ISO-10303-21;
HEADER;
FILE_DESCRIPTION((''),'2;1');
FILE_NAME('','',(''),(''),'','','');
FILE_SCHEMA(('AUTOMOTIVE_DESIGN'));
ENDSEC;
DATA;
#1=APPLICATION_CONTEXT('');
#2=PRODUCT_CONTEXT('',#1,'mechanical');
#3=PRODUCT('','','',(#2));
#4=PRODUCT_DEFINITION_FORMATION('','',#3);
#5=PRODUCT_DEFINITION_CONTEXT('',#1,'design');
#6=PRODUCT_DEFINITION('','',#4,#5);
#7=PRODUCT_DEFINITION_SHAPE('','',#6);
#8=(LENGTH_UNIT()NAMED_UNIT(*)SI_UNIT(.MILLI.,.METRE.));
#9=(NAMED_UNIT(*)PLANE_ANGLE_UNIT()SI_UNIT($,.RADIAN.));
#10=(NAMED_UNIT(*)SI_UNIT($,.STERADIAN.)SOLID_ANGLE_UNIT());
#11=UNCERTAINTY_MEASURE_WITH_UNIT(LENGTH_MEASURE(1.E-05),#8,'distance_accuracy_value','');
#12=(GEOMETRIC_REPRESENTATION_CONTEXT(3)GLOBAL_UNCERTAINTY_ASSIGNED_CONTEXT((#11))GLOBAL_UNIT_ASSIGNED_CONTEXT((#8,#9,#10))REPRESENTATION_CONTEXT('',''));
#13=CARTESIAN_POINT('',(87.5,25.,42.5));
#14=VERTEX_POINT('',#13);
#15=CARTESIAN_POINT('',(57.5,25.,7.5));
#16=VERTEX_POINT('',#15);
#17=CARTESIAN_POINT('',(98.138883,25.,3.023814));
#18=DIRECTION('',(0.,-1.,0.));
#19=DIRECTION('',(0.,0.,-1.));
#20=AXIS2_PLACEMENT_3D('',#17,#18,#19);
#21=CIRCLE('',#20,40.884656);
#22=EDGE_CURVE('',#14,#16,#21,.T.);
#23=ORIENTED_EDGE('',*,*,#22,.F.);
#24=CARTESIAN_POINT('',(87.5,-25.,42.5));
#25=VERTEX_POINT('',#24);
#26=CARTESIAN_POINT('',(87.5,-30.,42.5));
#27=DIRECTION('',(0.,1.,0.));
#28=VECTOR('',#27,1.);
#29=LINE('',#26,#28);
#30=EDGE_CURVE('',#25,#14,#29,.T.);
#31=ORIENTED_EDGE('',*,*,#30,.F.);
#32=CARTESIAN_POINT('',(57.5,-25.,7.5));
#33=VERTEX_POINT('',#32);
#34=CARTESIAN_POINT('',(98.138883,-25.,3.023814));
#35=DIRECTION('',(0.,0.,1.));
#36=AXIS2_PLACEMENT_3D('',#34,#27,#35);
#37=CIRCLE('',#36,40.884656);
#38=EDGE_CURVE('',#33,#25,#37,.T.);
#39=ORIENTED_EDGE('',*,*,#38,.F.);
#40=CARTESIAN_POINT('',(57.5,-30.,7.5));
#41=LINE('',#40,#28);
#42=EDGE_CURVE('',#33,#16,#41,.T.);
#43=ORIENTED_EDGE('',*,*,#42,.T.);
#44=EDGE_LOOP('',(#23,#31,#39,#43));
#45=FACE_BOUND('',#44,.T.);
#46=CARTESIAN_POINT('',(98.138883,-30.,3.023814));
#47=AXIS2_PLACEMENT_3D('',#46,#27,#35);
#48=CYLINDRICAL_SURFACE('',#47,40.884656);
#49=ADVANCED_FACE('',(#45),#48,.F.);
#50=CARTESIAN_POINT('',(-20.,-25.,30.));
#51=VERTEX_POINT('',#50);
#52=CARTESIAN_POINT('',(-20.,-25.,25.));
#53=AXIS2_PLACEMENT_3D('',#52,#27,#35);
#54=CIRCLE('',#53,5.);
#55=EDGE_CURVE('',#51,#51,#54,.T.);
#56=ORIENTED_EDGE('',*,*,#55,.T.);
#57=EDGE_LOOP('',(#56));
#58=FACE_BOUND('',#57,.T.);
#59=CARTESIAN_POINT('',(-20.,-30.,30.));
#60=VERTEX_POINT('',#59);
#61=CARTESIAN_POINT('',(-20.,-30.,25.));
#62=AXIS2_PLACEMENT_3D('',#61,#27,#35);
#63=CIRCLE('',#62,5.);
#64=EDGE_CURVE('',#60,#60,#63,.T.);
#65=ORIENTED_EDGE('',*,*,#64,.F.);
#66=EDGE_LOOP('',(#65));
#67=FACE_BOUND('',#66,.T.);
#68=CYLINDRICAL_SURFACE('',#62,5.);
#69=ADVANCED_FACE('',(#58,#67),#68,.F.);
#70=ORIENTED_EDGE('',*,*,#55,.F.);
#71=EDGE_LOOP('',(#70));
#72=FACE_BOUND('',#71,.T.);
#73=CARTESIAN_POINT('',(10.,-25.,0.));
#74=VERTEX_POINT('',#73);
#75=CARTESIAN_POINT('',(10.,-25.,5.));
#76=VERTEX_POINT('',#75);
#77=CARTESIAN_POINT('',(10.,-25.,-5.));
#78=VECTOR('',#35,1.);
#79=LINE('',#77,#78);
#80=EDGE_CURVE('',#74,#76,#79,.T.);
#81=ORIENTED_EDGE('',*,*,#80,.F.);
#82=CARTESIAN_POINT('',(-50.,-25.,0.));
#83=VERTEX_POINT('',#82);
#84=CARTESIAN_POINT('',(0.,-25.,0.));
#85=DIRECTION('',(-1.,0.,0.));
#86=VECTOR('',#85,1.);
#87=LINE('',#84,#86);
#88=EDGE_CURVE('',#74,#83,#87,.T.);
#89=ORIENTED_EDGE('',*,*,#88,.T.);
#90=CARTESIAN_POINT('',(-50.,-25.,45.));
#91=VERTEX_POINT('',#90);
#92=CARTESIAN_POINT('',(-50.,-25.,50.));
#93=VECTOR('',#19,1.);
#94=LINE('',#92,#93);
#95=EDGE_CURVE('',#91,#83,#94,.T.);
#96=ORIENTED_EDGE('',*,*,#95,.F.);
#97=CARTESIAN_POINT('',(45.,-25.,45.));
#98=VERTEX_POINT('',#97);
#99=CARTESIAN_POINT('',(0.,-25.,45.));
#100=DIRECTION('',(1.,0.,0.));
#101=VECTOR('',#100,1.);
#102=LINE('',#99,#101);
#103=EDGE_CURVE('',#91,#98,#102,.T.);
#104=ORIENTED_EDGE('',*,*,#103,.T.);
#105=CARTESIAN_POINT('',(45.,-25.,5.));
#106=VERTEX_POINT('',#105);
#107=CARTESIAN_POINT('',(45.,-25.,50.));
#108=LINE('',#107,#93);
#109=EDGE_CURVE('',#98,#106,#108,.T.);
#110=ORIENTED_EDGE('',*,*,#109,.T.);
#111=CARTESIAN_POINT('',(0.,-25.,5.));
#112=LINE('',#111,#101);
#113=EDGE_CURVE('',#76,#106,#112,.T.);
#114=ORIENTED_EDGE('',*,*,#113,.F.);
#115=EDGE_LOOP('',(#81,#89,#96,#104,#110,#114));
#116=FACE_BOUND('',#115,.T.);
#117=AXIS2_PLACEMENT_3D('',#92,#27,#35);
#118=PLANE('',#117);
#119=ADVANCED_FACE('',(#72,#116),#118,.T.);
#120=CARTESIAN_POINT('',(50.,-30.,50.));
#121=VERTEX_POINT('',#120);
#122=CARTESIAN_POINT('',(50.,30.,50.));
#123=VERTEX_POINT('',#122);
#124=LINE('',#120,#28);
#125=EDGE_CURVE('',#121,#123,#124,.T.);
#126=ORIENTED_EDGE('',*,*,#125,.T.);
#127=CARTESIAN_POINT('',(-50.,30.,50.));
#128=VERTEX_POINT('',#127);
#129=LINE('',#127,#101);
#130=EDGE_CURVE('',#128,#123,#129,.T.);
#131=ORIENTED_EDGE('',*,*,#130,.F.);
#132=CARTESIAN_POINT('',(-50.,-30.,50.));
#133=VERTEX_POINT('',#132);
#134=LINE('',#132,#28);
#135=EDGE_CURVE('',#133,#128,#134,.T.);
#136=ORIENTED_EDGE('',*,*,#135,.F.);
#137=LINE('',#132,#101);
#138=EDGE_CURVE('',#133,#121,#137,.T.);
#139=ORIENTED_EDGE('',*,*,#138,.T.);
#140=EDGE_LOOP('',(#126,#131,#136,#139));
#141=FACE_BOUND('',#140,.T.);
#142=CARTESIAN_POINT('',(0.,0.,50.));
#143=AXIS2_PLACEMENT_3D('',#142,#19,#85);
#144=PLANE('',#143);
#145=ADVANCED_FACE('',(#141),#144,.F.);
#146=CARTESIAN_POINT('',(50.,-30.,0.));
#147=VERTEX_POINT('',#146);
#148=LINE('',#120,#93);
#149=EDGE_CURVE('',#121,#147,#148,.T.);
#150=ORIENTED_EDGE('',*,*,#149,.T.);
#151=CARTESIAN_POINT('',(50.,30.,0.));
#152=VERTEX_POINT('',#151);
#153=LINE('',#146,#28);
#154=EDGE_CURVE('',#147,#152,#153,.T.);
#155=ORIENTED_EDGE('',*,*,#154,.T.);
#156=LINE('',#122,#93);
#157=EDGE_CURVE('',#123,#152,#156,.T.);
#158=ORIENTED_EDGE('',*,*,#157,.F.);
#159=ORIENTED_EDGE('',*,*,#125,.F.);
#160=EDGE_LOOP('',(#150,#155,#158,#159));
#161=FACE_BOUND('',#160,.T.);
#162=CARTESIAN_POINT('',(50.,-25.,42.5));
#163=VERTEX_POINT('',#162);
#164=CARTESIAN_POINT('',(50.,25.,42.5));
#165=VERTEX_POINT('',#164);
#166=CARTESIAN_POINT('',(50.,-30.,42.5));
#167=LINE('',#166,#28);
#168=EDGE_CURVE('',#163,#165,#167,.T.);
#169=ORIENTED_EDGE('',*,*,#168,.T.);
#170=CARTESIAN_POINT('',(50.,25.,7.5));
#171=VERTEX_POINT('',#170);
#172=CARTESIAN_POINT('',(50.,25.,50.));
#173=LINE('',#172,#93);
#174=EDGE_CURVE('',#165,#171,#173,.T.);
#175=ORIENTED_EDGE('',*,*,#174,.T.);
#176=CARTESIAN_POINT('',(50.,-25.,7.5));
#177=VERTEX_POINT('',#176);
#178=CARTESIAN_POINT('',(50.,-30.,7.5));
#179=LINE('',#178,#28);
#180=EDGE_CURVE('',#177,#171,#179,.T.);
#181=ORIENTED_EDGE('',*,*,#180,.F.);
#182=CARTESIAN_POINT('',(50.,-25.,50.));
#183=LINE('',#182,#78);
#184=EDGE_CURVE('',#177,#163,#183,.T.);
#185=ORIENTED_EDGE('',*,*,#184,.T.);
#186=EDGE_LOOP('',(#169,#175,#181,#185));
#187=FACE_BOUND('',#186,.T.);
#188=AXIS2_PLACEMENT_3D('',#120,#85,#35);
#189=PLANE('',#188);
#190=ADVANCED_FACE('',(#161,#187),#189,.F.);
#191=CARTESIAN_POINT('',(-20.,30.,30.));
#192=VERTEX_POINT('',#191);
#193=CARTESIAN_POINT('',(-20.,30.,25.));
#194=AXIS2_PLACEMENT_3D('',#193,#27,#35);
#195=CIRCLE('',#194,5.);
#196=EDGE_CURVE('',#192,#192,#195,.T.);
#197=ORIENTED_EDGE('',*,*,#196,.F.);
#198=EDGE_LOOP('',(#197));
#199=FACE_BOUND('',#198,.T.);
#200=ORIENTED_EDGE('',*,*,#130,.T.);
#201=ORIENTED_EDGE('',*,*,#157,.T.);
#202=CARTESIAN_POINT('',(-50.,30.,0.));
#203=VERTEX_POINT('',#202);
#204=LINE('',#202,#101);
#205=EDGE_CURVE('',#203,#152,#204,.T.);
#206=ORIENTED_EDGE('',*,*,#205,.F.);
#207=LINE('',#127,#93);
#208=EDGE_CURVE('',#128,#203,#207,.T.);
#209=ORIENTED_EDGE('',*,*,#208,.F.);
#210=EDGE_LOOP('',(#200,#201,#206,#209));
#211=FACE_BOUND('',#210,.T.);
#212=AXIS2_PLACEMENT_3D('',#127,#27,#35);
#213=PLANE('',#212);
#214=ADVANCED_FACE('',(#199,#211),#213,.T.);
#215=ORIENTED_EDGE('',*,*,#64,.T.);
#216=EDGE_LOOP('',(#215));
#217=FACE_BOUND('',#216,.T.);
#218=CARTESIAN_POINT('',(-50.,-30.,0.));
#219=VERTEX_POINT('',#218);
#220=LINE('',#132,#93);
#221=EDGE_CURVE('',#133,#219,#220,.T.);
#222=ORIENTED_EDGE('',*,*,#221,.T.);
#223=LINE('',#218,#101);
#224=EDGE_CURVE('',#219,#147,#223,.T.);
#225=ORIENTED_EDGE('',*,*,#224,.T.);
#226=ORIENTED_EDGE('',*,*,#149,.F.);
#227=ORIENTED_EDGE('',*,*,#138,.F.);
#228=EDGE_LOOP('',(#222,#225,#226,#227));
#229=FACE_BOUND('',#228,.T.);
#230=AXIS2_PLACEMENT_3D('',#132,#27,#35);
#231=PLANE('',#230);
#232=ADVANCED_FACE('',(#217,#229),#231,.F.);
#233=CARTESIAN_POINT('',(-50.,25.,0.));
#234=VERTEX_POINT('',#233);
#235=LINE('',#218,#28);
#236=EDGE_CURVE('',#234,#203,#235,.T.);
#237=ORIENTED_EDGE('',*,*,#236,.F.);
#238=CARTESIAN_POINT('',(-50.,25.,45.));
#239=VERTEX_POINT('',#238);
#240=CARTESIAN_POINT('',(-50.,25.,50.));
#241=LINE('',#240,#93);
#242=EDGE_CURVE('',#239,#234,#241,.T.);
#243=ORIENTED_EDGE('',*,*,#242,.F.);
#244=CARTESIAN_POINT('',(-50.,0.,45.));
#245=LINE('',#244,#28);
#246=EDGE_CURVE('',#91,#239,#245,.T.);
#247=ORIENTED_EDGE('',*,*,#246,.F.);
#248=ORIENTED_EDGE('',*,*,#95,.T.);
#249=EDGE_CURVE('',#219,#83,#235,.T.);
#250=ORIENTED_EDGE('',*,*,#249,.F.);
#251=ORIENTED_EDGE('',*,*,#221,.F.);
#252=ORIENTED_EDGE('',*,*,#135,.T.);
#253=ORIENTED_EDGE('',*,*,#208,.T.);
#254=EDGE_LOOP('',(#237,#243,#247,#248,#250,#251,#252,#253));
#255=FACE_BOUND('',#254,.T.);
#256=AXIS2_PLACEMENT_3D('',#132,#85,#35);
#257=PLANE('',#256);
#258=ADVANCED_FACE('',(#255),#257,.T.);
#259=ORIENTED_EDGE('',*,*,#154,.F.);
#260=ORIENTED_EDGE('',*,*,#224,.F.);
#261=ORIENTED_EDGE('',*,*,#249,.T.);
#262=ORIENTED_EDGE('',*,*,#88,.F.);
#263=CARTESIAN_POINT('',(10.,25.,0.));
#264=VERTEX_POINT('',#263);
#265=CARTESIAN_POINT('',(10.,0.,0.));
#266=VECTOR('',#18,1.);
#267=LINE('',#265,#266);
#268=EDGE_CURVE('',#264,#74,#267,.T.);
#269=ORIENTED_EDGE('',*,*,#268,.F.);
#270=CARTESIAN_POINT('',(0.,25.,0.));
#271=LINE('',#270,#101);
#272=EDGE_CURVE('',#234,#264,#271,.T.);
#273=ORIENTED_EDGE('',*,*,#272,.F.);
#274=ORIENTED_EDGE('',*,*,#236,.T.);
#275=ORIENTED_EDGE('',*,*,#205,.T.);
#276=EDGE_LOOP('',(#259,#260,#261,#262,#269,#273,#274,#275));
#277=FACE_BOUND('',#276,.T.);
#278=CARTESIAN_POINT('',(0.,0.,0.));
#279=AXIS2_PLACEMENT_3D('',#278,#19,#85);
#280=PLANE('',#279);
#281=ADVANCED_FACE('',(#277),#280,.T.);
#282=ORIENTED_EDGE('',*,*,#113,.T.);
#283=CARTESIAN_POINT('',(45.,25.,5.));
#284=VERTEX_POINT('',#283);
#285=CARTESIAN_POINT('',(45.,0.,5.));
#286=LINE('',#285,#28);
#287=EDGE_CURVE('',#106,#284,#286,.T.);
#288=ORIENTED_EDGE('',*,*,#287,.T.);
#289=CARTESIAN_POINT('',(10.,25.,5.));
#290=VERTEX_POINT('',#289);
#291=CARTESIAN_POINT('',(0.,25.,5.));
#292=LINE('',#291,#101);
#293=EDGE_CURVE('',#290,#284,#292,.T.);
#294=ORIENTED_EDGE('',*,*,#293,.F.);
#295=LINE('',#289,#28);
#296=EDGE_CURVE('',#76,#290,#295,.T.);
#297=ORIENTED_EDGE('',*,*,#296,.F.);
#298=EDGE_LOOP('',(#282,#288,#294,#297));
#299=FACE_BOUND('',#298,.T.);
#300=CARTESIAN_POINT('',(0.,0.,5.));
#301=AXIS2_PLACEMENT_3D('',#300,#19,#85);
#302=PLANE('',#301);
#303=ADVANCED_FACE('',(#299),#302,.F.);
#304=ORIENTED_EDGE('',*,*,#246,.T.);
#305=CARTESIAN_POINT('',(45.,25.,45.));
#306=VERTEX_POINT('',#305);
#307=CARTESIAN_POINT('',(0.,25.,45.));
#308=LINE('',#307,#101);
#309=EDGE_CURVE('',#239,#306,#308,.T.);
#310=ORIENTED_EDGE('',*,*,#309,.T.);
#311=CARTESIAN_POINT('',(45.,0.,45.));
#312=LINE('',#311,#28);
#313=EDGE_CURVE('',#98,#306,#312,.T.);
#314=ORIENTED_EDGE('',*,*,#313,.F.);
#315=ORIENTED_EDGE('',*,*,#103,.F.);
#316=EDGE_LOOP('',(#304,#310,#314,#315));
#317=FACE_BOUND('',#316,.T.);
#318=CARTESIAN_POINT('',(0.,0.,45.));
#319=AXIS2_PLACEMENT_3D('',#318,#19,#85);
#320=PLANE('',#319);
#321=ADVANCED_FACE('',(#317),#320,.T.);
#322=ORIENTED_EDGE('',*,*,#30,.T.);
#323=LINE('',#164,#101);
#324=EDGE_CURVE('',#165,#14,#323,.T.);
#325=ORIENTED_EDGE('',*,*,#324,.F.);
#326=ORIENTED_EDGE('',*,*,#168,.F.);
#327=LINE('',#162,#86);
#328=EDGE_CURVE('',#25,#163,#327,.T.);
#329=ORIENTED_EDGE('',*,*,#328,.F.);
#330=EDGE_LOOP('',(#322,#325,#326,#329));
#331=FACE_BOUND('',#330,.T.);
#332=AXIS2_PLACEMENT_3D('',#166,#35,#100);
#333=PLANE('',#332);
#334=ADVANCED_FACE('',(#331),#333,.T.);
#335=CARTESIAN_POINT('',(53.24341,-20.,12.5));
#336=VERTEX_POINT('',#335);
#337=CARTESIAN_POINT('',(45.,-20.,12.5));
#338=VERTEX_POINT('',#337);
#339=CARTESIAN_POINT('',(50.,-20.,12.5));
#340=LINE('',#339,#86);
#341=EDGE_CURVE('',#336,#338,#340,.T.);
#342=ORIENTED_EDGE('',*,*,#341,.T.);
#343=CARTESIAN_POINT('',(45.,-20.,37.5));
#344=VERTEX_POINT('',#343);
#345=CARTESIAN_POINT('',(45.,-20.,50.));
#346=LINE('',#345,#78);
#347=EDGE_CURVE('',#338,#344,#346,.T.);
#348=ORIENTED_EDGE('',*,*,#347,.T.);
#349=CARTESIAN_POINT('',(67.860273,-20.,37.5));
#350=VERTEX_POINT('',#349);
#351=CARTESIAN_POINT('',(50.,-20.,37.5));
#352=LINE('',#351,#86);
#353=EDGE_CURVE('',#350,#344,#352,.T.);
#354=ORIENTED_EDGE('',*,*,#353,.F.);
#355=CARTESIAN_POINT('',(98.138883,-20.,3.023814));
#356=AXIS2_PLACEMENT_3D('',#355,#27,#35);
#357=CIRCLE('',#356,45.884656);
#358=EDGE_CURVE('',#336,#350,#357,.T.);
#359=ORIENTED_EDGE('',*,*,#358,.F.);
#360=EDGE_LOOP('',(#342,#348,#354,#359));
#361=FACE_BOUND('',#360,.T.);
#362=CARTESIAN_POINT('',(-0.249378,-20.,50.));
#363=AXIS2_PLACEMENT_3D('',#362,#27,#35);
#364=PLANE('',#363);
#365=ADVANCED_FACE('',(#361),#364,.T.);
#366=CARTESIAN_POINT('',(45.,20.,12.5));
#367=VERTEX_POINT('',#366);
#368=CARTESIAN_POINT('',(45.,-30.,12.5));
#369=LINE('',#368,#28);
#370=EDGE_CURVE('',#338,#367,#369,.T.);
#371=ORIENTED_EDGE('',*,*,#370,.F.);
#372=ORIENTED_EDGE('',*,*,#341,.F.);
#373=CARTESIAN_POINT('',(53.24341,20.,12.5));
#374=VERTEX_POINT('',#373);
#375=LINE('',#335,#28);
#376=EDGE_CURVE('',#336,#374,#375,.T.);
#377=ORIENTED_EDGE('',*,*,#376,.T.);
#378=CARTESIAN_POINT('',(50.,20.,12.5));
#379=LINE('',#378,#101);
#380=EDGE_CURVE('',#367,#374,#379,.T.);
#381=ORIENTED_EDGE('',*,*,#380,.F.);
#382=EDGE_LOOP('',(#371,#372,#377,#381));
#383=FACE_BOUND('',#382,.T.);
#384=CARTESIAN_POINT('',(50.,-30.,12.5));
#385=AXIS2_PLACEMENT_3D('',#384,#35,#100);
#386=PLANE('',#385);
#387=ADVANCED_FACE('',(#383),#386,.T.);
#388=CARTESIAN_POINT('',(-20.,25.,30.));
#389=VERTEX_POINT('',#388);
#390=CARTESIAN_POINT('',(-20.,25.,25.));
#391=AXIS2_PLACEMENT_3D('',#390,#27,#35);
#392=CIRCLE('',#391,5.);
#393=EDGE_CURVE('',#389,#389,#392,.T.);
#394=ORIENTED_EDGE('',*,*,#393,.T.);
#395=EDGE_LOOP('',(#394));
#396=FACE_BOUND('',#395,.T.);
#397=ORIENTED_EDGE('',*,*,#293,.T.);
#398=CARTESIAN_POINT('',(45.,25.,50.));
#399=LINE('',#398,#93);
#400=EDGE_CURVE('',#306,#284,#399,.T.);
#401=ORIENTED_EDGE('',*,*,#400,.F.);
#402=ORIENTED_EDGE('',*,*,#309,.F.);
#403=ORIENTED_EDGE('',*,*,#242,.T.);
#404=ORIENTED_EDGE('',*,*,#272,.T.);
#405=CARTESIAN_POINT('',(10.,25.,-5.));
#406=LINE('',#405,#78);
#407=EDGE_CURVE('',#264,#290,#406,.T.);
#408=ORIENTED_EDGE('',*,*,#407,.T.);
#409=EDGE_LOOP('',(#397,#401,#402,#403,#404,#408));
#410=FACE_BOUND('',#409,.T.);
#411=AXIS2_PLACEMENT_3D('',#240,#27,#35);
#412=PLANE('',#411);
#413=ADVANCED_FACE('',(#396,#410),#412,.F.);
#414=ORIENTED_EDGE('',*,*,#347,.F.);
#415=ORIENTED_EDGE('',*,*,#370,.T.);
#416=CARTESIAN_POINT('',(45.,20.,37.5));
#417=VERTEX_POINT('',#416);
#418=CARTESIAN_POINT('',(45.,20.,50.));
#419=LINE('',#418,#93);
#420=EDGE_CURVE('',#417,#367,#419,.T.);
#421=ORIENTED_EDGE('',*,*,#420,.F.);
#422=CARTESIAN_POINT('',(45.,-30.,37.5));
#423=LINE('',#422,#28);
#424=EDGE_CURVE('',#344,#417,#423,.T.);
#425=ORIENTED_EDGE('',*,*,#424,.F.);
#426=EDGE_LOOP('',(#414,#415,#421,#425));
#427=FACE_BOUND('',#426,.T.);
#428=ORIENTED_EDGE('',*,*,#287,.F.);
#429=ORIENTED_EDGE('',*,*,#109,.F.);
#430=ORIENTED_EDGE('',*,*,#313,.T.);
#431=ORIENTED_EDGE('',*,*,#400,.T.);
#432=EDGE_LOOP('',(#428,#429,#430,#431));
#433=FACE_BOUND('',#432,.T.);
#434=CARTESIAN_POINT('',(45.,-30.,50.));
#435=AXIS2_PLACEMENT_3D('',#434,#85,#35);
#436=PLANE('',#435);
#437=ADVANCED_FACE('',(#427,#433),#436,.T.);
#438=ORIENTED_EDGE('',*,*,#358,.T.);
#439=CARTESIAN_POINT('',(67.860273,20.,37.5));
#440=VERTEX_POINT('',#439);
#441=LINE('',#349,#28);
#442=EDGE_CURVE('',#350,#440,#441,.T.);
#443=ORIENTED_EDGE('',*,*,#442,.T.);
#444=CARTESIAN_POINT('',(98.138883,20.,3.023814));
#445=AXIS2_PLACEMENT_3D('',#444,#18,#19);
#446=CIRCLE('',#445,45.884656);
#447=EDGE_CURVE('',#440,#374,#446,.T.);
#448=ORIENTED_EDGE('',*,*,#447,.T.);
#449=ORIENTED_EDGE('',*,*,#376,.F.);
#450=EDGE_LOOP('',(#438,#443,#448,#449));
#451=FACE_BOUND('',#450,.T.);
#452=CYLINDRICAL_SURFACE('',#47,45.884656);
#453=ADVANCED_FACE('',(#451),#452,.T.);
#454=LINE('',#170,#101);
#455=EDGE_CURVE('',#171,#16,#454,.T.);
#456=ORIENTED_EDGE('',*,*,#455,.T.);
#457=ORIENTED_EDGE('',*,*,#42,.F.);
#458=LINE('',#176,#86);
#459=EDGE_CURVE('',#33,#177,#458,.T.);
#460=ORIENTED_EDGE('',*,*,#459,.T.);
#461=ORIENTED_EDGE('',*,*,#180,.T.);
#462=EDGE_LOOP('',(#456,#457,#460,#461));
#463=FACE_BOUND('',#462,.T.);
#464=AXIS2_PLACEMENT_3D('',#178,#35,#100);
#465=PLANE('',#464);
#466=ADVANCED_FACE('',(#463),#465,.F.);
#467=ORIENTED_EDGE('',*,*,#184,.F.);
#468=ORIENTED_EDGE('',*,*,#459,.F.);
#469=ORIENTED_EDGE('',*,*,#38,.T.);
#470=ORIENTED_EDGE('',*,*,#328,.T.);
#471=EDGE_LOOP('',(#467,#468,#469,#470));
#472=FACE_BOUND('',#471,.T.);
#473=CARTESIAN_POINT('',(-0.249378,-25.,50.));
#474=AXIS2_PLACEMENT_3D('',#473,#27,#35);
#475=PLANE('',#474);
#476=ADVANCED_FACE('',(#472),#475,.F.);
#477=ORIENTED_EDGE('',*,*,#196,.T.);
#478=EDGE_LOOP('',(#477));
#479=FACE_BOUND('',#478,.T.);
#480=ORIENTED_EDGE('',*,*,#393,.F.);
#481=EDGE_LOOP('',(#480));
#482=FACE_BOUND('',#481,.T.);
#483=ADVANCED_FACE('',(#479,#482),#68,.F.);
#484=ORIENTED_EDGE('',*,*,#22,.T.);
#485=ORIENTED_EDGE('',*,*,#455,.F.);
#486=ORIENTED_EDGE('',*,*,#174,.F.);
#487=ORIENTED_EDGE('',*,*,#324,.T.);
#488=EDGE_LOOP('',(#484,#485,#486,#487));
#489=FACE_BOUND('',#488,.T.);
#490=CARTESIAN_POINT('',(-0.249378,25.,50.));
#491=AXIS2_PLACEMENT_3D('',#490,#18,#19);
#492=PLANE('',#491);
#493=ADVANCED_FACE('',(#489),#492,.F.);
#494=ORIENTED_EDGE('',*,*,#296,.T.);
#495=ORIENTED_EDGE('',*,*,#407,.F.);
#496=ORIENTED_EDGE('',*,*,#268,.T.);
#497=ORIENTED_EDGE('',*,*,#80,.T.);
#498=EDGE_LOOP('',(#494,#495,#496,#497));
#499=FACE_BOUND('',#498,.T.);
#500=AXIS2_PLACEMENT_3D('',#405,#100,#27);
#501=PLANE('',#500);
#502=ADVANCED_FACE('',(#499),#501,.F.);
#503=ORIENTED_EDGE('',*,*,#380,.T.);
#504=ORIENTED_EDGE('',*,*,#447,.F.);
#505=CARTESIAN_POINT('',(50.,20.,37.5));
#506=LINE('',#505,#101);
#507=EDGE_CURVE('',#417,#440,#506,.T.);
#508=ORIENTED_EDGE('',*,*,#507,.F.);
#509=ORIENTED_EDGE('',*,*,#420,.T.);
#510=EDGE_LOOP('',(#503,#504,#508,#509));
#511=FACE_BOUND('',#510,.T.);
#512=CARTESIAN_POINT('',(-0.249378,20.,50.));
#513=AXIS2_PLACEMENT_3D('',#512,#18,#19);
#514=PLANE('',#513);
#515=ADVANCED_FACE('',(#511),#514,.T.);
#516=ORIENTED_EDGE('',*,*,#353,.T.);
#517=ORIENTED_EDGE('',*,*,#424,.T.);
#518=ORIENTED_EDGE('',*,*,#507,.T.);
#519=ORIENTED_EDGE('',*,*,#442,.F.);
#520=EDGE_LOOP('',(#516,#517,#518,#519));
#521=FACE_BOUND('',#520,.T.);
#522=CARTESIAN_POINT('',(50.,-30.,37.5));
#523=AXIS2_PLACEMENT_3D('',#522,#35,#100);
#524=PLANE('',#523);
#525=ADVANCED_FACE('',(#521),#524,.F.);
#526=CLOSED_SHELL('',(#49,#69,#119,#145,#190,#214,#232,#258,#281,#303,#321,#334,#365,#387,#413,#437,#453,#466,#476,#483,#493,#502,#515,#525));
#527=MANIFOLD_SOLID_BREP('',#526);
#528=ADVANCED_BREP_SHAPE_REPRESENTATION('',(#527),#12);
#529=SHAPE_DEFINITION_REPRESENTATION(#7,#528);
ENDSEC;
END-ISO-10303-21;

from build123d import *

# Parameters (mm, degrees)
SKETCH2_W               = 100
SKETCH2_H               = 60
BOSS_EXTRUDE1_DEPTH     = 50
SHELL1_T                = -5
SKETCH4_W               = 60
SKETCH4_H               = 50
CUT_EXTRUDE1_DEPTH      = 10
CUT_EXTRUDE2_DEPTH      = 90.582364336
CUT_EXTRUDE2_DEPTH_BACK = 90.582364336
SKETCH5_R               = 5
BOSS_EXTRUDE2_DEPTH     = 60
SKETCH15_W              = 5
SKETCH15_H              = 50
CUT_EXTRUDE4_DEPTH      = 37.5
SHELL3_START            = -20
SHELL3_DEPTH            = 40


# Read off the part's stored shape, not the designer's step: Shell3
with BuildPart() as part:
    # Sketch2 → Boss-Extrude1 (new body)
    with BuildSketch(Plane.XY):
        Rectangle(SKETCH2_W, SKETCH2_H)
    extrude(amount=BOSS_EXTRUDE1_DEPTH)

    # Shell1
    shell1_openings = [part.faces().sort_by_distance(p)[0] for p in [
        (-50, 0, 25),
    ]]
    offset(amount=SHELL1_T, openings=shell1_openings, kind=Kind.INTERSECTION)

    # Sketch4 → Cut-Extrude1 (cut)
    with BuildSketch(Plane.XY.offset(5)):
        with Locations((-20, 0)):
            Rectangle(SKETCH4_W, SKETCH4_H)
    extrude(amount=-CUT_EXTRUDE1_DEPTH, mode=Mode.SUBTRACT)

    # Sketch5 → Cut-Extrude2 (cut, two sides: drawn at the far end of the back side and taken through both)
    with BuildSketch(Plane(origin=(0, -25, 0), x_dir=(1, 0, 0), z_dir=(0, 1, 0)).offset(-CUT_EXTRUDE2_DEPTH_BACK)):
        with Locations(Location((-20, -25, 0), (0, 0, 270))):
            Circle(SKETCH5_R)
    extrude(amount=CUT_EXTRUDE2_DEPTH + CUT_EXTRUDE2_DEPTH_BACK, mode=Mode.SUBTRACT)

    # Sketch13 → Boss-Extrude2 (add)
    with BuildSketch(Plane(origin=(0, 30, 0), x_dir=(1, 0, 0), z_dir=(0, 1, 0))):
        with BuildLine():
            Line((50, -42.5), (57.5, -42.5))
            Line((57.5, -42.5), (87.5, -42.5))
            ThreePointArc((87.5, -42.5), (67.096938471, -29.631195597), (57.5, -7.5))
            Line((57.5, -7.5), (50, -7.5))
            Line((50, -7.5), (50, -42.5))
        make_face()
    extrude(amount=-BOSS_EXTRUDE2_DEPTH)

    # Sketch15 → Cut-Extrude4 (cut)
    with BuildSketch(Plane.YZ.offset(87.5)):
        with Locations((-27.5, 25)):
            Rectangle(SKETCH15_W, SKETCH15_H)
        with Locations((27.5, 25)):
            Rectangle(SKETCH15_W, SKETCH15_H)
    extrude(amount=-CUT_EXTRUDE4_DEPTH, mode=Mode.SUBTRACT)

    # Shell3 outline → Shell3 (cut)
    with BuildSketch(Plane(origin=(0, 0, 0), x_dir=(1, 0, 0), z_dir=(0, 1, 0)).offset(SHELL3_START)):
        with BuildLine():
            Line((53.243409838, -12.5), (45, -12.5))
            Line((45, -12.5), (45, -37.5))
            Line((45, -37.5), (67.860272771, -37.5))
            ThreePointArc((67.860272771, -37.5), (58.527827688, -26.183389184), (53.243409838, -12.5))
        make_face()
    extrude(amount=SHELL3_DEPTH, mode=Mode.SUBTRACT)


solid = part.part
